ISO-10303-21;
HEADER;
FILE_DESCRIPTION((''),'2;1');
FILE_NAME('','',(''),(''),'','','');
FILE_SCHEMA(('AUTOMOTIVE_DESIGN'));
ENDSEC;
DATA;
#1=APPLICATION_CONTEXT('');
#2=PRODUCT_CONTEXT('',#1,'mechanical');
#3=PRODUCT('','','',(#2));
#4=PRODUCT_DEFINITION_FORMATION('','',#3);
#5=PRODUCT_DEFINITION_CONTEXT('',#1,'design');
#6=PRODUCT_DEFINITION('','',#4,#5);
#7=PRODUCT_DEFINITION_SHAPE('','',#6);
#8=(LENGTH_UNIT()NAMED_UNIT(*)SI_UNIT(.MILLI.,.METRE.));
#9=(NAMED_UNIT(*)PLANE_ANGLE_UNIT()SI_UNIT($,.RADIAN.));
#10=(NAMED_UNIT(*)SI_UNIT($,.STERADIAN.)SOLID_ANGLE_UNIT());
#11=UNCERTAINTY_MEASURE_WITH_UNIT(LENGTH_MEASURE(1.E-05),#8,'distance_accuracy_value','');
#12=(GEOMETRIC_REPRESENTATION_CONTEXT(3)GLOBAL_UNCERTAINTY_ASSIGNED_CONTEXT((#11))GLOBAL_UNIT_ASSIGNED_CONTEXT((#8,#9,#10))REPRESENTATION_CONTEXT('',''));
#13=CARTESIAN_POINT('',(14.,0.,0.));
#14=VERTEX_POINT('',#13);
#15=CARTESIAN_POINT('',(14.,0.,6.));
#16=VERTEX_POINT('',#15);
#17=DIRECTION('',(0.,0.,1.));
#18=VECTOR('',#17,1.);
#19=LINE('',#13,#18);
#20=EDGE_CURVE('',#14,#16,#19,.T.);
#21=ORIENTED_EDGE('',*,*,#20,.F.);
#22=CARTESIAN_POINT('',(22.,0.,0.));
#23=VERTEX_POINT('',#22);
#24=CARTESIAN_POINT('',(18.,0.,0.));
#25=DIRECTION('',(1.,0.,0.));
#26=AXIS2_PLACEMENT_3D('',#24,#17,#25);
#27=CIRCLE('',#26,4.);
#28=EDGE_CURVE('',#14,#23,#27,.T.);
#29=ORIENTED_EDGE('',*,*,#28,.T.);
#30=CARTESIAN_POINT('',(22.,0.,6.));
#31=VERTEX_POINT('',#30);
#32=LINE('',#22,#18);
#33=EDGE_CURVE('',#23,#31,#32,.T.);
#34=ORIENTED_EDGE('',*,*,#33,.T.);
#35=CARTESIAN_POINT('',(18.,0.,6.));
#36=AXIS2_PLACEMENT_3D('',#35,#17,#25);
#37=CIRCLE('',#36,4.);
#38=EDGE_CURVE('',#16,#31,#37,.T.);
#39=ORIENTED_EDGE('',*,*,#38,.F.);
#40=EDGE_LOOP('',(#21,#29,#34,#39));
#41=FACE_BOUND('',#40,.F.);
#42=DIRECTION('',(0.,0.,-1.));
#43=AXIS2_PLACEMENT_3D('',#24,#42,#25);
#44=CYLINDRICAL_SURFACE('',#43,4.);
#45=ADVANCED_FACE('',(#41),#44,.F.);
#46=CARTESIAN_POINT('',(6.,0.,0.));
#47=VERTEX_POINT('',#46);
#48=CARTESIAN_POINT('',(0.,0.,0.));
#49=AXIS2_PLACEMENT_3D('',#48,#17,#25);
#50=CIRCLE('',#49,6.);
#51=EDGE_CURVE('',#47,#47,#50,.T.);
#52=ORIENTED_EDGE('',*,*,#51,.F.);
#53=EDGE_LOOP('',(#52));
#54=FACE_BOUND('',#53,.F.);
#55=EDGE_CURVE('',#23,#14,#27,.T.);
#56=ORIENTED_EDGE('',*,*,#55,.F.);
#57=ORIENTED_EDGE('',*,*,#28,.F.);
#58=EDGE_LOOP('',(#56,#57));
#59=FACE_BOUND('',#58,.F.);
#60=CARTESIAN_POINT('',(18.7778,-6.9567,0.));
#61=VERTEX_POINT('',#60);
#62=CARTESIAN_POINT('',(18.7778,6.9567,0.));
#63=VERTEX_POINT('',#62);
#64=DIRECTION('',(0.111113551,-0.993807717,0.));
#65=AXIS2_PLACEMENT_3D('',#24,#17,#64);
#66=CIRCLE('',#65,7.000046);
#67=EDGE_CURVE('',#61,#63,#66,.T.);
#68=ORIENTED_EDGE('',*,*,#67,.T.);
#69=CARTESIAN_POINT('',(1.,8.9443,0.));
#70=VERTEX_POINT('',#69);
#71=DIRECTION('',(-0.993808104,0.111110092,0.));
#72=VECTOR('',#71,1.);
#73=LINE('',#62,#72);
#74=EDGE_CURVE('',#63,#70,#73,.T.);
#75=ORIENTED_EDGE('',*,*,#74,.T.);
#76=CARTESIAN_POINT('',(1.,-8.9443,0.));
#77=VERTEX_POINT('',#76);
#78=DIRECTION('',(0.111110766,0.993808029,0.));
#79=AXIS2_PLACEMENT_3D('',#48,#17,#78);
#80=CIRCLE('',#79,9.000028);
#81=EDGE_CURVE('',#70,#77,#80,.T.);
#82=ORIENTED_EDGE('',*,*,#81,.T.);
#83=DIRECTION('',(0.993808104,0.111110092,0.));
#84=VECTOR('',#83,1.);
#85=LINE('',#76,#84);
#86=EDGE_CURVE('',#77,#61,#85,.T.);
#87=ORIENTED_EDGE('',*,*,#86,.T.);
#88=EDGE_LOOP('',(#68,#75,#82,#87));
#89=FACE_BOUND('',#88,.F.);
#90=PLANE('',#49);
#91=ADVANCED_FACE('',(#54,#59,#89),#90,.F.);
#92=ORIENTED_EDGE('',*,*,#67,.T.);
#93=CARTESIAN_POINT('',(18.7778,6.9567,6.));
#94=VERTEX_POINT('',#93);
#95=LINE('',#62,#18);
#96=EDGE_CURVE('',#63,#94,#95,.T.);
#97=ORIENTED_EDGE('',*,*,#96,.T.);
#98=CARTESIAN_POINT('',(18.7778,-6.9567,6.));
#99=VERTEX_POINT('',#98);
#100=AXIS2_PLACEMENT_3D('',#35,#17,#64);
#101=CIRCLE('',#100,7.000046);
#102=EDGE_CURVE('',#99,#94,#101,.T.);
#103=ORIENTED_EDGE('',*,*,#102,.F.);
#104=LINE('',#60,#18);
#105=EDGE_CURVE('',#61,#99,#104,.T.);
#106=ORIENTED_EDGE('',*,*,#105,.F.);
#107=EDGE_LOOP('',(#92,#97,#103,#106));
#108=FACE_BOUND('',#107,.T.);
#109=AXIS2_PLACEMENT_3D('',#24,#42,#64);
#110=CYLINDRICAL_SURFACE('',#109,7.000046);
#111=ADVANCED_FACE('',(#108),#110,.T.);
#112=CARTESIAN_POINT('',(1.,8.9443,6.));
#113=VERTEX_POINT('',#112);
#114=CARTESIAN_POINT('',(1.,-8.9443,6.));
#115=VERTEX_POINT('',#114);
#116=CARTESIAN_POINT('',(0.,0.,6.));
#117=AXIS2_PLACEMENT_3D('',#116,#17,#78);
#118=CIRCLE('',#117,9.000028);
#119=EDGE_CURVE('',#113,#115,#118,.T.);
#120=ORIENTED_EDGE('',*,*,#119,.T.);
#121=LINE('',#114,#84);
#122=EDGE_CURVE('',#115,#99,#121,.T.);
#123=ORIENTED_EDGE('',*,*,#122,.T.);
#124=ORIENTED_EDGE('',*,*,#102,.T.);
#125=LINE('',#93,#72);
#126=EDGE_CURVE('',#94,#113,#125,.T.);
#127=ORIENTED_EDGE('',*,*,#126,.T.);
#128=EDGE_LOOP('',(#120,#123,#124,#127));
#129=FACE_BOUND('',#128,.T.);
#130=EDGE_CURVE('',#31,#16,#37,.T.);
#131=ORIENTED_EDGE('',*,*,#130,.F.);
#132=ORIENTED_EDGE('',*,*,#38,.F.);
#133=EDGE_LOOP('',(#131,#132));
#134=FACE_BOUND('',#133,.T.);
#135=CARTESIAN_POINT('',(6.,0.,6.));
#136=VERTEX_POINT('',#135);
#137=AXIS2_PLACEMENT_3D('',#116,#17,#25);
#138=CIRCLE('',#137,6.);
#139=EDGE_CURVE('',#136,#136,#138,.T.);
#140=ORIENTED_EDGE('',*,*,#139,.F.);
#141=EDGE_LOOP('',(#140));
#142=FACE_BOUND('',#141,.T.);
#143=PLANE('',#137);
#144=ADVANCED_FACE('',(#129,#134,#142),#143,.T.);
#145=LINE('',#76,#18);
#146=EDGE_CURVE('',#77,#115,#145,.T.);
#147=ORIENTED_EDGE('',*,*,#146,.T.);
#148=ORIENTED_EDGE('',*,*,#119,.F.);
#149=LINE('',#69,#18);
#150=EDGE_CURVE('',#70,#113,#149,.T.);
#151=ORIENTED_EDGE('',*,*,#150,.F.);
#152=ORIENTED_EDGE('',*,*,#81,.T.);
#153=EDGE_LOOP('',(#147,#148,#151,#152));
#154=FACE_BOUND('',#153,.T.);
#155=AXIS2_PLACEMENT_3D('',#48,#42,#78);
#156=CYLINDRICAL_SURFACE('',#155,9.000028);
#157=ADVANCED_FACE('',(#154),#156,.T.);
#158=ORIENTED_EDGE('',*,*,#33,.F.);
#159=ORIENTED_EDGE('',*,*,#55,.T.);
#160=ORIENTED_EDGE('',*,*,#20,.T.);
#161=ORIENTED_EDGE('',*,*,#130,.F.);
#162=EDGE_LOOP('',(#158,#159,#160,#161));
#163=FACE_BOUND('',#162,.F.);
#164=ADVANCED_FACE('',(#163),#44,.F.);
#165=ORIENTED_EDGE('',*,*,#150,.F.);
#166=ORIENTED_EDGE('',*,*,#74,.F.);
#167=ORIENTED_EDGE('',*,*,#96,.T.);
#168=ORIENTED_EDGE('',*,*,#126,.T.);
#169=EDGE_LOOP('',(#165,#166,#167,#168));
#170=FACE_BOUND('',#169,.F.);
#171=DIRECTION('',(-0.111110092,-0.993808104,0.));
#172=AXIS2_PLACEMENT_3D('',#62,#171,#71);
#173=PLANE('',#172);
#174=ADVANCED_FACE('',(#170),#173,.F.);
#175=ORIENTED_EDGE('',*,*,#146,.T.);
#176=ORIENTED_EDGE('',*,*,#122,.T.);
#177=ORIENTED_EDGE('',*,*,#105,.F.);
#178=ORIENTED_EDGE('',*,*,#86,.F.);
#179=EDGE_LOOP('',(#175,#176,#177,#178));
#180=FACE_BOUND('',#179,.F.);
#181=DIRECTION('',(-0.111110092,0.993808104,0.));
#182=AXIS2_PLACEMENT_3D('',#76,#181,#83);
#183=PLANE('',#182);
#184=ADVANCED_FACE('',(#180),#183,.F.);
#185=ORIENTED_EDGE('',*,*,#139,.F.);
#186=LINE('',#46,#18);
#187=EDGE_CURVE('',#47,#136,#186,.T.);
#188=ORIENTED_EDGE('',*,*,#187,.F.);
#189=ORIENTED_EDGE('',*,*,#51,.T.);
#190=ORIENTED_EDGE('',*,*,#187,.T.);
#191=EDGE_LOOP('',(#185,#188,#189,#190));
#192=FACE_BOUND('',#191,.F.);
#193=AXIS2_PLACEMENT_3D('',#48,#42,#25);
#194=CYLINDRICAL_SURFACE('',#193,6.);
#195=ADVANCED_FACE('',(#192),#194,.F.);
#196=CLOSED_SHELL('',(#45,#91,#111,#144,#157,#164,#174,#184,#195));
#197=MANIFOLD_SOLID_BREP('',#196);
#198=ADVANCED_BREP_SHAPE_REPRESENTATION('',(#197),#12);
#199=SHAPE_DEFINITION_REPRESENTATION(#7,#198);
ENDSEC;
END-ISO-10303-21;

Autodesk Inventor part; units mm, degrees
ref_plane "YZ Plane" through (0, 0, 0) normal (1, 0, 0) x (0, 1, 0)
ref_plane "XZ Plane" through (0, 0, 0) normal (0, 1, 0) x (-1, 0, 0)
ref_plane "XY Plane" through (0, 0, 0) normal (0, 0, 1) x (1, 0, 0)
sketch "Эскиз1" plane through (0, 0, 0) normal (0, 0, 1) x (1, 0, 0)
  circle A0 centre (0, 0) radius 6
  circle A1 centre (18, 0) radius 4
  line L0 (0, 0) -> (18, 0)
  line L1 (0, 0) -> (18, 0) construction
  line L2 (1, -8.9443) -> (18.7778, -6.9567)
  line L3 (18.7778, 6.9567) -> (1, 8.9443)
  arc A2 (1, 8.9443) -> (1, -8.9443) centre (0, 0) ccw
  arc A3 (18.7778, -6.9567) -> (18.7778, 6.9567) centre (18, 0) ccw
  point P0 (9, 0)
  dimension "d0" = 12
  dimension "d1" = 8
  dimension "d2" = 18
  dimension "d4" = 9
  dimension "d7" = 7
extrude "Выдавливание1" add sketch "Эскиз1" along normal blind 6
properties part number "Крепление петли"
